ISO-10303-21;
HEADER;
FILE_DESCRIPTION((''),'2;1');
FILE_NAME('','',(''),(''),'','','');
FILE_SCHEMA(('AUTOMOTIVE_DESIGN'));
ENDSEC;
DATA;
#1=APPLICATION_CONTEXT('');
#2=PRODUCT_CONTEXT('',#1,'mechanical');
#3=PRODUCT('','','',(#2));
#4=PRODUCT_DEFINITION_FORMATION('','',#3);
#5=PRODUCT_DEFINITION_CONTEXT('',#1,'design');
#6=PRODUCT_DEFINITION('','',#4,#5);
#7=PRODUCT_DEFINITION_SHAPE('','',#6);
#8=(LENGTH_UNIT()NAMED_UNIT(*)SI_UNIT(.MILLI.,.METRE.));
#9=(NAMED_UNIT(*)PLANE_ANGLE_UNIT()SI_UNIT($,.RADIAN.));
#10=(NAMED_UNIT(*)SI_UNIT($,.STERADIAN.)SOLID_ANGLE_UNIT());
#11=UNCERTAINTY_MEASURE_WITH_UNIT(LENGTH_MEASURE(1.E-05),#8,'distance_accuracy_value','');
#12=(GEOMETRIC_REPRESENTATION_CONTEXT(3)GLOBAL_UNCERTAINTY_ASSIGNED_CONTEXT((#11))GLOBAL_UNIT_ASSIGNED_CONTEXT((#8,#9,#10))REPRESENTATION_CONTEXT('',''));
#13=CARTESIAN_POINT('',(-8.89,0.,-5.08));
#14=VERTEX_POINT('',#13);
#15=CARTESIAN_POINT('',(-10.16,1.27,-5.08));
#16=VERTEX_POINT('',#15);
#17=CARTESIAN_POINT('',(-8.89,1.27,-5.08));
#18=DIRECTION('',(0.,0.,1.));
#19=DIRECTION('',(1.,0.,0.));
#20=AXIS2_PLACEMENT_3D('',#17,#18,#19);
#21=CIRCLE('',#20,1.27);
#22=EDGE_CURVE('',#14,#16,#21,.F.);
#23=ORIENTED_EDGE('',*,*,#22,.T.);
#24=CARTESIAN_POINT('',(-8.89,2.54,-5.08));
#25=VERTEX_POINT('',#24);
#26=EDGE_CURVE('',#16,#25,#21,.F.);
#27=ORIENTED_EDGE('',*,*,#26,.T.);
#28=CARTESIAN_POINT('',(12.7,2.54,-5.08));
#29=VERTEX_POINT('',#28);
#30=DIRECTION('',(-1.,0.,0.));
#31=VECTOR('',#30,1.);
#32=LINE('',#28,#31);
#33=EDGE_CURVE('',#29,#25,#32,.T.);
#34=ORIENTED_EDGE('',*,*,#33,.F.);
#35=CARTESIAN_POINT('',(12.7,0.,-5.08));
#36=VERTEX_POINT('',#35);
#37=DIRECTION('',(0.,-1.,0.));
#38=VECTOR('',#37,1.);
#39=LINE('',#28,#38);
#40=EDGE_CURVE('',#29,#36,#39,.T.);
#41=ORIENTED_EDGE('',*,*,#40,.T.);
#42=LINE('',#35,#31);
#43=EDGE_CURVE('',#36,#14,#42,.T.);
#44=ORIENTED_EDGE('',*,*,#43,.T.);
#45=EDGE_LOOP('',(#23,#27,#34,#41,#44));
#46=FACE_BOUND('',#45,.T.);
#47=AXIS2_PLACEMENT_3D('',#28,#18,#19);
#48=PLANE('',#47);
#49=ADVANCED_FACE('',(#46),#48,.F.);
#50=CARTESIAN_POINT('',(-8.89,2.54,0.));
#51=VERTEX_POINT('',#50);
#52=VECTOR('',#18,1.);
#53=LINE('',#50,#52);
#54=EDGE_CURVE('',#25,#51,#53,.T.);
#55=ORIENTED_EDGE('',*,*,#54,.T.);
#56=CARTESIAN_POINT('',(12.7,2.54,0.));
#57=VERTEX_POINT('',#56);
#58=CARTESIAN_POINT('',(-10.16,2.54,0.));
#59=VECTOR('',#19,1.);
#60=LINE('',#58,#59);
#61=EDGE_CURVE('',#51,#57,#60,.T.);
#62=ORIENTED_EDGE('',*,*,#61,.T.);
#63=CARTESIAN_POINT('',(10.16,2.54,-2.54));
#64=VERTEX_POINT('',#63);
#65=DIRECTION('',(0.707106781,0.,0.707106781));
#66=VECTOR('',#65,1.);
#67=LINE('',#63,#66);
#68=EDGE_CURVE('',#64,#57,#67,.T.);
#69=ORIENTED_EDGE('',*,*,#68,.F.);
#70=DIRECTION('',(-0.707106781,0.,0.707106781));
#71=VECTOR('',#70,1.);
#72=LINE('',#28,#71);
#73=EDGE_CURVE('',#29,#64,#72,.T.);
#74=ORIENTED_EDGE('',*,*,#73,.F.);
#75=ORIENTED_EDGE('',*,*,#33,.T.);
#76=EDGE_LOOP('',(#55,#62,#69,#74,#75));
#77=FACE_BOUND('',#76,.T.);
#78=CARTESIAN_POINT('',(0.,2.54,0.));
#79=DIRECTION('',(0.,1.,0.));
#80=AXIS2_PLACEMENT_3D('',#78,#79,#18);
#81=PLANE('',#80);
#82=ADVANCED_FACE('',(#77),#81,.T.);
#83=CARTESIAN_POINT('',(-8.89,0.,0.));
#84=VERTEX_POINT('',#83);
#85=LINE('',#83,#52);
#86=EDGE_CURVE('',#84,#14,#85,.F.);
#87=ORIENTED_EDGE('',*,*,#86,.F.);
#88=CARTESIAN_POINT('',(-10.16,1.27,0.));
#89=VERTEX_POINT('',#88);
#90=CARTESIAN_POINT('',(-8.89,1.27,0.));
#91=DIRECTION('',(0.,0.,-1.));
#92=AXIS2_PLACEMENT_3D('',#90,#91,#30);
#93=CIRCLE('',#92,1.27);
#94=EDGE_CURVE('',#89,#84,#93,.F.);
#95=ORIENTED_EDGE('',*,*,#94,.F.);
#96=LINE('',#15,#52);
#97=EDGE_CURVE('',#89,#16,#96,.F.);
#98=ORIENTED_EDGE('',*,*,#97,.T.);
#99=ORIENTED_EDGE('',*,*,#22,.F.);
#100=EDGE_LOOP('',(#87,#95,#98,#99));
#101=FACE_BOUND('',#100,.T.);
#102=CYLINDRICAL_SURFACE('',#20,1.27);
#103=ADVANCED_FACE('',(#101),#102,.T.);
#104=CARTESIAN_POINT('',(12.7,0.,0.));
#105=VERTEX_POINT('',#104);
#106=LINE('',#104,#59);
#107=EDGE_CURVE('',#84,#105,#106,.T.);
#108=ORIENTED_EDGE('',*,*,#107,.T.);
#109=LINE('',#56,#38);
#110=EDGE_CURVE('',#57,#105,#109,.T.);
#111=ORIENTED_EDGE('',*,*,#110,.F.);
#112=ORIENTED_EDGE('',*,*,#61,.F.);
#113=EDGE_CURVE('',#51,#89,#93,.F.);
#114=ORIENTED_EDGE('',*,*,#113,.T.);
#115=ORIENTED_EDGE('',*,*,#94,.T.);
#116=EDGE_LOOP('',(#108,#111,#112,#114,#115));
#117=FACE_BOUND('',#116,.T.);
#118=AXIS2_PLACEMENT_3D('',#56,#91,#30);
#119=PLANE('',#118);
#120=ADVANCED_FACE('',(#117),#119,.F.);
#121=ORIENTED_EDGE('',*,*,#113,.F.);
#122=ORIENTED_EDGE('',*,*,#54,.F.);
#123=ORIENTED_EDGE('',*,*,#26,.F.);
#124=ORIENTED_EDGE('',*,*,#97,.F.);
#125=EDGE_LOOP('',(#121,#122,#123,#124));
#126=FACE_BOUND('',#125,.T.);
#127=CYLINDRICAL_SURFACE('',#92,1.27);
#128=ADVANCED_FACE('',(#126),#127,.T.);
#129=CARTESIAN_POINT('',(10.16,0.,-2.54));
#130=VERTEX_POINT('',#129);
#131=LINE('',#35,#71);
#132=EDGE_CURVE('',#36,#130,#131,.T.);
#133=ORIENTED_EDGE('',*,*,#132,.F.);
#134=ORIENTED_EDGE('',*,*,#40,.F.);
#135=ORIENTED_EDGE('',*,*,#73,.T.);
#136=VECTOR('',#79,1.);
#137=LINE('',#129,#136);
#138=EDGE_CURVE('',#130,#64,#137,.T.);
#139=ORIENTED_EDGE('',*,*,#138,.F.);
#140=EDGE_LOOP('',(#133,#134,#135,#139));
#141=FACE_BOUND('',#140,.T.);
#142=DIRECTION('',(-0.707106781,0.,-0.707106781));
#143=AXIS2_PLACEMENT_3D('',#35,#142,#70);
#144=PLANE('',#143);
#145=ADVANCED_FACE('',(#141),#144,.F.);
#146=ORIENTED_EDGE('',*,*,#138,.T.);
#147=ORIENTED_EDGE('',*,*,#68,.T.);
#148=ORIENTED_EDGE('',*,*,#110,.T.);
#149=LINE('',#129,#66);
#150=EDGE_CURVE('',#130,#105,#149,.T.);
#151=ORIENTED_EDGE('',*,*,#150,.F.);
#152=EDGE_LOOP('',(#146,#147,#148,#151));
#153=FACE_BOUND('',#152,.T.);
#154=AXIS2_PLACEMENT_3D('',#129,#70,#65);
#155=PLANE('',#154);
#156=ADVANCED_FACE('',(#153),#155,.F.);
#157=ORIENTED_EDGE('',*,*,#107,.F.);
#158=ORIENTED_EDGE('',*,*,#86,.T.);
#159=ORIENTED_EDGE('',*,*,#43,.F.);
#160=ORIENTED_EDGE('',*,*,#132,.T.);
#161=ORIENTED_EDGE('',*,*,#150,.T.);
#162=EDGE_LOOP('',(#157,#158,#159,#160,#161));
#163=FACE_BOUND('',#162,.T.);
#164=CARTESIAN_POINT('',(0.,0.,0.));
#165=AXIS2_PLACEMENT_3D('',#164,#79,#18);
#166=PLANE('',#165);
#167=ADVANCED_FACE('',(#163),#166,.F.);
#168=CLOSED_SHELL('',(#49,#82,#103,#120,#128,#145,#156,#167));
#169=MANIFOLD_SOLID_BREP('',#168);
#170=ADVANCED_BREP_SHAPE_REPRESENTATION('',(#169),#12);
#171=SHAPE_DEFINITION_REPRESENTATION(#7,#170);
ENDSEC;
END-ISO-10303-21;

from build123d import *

# Parameters (mm, degrees)
BOSS_EXTRUDE1_DEPTH = 2.54
FILLET1_R           = 1.27
CUT_EXTRUDE2_DEPTH  = 2.54


with BuildPart() as part:
    # Sketch1 → Boss-Extrude1 (new body)
    with BuildSketch(Plane(origin=(0, 0, 0), x_dir=(1, 0, 0), z_dir=(0, 1, 0))):
        Polygon((12.7, 0), (0, 0), (-10.16, 0), (-10.16, 5.08), (12.7, 5.08), align=None)
    extrude(amount=BOSS_EXTRUDE1_DEPTH)

    # Fillet1
    fillet1_edges = [part.edges().sort_by_distance(p)[0] for p in [
        (-10.16, 0, -2.54),
        (-10.16, 2.54, -2.54),
    ]]
    fillet(fillet1_edges, radius=FILLET1_R - 0.0001)  # a hair under: the kernel refuses the full size

    # Sketch3 → Cut-Extrude2 (cut)
    with BuildSketch(Plane(origin=(0, 2.54, 0), x_dir=(1, 0, 0), z_dir=(0, 1, 0))):
        Polygon((12.7, 5.08), (10.16, 2.54), (12.7, 0), align=None)
    extrude(amount=-CUT_EXTRUDE2_DEPTH, mode=Mode.SUBTRACT)


solid = part.part
